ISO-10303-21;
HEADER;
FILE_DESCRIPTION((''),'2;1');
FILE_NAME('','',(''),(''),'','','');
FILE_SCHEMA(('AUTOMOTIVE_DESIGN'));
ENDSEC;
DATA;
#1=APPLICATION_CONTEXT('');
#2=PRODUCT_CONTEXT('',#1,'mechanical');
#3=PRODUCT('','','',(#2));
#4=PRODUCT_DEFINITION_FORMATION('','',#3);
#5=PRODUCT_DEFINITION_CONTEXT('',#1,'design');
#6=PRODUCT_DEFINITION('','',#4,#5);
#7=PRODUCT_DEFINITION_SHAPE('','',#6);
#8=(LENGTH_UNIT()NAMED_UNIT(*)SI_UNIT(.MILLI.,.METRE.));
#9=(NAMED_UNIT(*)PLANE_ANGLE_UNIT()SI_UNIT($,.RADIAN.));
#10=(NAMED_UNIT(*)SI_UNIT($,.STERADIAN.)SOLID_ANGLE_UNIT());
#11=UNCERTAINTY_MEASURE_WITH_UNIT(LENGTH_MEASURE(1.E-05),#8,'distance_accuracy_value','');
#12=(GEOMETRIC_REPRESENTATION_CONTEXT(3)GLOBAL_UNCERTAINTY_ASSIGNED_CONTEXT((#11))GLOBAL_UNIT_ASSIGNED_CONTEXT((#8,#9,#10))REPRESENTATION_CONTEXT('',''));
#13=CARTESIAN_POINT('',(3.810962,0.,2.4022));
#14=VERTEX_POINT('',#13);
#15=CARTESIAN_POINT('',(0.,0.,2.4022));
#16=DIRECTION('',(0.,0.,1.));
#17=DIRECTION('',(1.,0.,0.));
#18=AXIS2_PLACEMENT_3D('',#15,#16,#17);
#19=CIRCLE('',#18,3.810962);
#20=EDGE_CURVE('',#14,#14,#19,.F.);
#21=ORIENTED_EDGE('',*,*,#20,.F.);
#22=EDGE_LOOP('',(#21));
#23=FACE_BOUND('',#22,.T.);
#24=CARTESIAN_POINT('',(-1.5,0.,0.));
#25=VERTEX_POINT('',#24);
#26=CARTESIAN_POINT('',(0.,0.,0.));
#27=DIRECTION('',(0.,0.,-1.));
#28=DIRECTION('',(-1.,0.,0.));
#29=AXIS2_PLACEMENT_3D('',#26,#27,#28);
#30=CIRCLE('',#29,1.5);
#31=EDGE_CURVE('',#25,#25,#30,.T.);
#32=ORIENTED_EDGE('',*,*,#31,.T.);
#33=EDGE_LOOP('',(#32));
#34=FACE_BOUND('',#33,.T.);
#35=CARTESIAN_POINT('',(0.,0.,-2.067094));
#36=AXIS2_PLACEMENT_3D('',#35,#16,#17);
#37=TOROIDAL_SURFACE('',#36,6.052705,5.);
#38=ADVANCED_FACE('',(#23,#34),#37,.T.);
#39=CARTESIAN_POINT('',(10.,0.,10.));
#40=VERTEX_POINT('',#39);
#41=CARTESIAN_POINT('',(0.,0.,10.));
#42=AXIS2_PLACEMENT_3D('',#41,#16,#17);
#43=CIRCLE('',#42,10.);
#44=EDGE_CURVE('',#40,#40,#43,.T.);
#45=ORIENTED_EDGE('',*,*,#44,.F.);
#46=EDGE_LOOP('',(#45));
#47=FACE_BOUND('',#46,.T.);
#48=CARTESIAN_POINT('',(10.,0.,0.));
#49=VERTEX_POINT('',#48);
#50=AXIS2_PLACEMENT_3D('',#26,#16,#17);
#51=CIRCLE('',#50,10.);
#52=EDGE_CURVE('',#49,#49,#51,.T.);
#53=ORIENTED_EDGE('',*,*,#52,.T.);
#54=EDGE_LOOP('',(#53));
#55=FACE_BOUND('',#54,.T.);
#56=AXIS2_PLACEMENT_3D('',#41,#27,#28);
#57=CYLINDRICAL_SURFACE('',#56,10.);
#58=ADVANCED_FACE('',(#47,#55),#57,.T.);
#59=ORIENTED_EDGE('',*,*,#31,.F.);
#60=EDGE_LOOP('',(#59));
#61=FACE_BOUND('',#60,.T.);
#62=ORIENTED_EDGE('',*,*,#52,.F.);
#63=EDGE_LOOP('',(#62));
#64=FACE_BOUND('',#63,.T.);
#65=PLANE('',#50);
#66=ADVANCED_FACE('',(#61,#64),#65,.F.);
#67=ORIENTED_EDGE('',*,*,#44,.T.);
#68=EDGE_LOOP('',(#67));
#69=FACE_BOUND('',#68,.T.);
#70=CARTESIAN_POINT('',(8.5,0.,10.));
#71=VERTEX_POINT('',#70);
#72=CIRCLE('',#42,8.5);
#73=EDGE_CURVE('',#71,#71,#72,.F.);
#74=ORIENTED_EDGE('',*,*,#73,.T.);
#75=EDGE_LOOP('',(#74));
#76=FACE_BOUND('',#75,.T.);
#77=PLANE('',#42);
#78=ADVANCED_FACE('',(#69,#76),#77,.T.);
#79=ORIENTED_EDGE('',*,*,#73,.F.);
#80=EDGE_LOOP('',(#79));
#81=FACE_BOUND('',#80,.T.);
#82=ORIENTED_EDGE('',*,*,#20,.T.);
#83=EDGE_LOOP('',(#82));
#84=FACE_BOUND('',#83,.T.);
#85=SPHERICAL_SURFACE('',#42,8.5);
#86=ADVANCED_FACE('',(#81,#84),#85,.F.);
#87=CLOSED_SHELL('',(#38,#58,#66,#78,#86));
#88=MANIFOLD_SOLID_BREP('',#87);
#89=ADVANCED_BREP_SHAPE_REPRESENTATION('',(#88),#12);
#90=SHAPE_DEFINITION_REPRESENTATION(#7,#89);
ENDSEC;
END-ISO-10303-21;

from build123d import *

# Parameters (mm, degrees)
SKETCH1_R           = 10
BOSS_EXTRUDE1_DEPTH = 10
SKETCH3_R           = 1.5
CUT_EXTRUDE1_DEPTH  = 8
FILLET1_R           = 5


with BuildPart() as part:
    # Sketch1 → Boss-Extrude1 (new body)
    with BuildSketch(Plane.XY):
        Circle(SKETCH1_R)
    extrude(amount=BOSS_EXTRUDE1_DEPTH)

    # Sketch2 → Cut-Revolve1 (revolve, cut)
    with BuildSketch(Plane.XY.offset(10)):
        with BuildLine():
            Line((0, 8.5), (0, -8.5))
            ThreePointArc((0, -8.5), (8.5, 0), (0, 8.5))
        make_face()
    revolve(axis=Axis((0, 8.5, 10), (0, -1, 0)), mode=Mode.SUBTRACT)

    # Sketch3 → Cut-Extrude1 (cut)
    with BuildSketch(Plane(origin=(0, 0, 0), x_dir=(-1, 0, 0), z_dir=(0, 0, -1))):
        Circle(SKETCH3_R)
    extrude(amount=-CUT_EXTRUDE1_DEPTH, mode=Mode.SUBTRACT)

    # Fillet1
    # the kernel refuses this fillet: 5 mm, written as the material it takes off along each edge
    with BuildSketch(Plane(origin=(3e-09, 0, 1.633399735), x_dir=(-1, 0, 0), z_dir=(0, -1, 0))) as fillet1_piece_1:
        with BuildLine():
            CenterArc((6.052704826, 3.70049401), FILLET1_R, 204.419783659, 38.942441269)
            Line((3.810962297, -0.768800166), (3.766127446, -0.858186049))
            ThreePointArc((3.766127446, -0.858186049), (2.65159267, -0.396088594), (1.482352944, -0.098430591))
            Line((1.482352944, -0.098430591), (1.400000003, 0))
            ThreePointArc((1.400000003, 0), (1.399999997, 0.816699867), (1.408945901, 1.592057849))
            Line((1.408945901, 1.592057849), (1.499999997, 1.633399735))
        make_face()
    revolve(axis=Axis((3e-09, 0, 1.633399735), (0, 0, -1)), mode=Mode.SUBTRACT)


solid = part.part
